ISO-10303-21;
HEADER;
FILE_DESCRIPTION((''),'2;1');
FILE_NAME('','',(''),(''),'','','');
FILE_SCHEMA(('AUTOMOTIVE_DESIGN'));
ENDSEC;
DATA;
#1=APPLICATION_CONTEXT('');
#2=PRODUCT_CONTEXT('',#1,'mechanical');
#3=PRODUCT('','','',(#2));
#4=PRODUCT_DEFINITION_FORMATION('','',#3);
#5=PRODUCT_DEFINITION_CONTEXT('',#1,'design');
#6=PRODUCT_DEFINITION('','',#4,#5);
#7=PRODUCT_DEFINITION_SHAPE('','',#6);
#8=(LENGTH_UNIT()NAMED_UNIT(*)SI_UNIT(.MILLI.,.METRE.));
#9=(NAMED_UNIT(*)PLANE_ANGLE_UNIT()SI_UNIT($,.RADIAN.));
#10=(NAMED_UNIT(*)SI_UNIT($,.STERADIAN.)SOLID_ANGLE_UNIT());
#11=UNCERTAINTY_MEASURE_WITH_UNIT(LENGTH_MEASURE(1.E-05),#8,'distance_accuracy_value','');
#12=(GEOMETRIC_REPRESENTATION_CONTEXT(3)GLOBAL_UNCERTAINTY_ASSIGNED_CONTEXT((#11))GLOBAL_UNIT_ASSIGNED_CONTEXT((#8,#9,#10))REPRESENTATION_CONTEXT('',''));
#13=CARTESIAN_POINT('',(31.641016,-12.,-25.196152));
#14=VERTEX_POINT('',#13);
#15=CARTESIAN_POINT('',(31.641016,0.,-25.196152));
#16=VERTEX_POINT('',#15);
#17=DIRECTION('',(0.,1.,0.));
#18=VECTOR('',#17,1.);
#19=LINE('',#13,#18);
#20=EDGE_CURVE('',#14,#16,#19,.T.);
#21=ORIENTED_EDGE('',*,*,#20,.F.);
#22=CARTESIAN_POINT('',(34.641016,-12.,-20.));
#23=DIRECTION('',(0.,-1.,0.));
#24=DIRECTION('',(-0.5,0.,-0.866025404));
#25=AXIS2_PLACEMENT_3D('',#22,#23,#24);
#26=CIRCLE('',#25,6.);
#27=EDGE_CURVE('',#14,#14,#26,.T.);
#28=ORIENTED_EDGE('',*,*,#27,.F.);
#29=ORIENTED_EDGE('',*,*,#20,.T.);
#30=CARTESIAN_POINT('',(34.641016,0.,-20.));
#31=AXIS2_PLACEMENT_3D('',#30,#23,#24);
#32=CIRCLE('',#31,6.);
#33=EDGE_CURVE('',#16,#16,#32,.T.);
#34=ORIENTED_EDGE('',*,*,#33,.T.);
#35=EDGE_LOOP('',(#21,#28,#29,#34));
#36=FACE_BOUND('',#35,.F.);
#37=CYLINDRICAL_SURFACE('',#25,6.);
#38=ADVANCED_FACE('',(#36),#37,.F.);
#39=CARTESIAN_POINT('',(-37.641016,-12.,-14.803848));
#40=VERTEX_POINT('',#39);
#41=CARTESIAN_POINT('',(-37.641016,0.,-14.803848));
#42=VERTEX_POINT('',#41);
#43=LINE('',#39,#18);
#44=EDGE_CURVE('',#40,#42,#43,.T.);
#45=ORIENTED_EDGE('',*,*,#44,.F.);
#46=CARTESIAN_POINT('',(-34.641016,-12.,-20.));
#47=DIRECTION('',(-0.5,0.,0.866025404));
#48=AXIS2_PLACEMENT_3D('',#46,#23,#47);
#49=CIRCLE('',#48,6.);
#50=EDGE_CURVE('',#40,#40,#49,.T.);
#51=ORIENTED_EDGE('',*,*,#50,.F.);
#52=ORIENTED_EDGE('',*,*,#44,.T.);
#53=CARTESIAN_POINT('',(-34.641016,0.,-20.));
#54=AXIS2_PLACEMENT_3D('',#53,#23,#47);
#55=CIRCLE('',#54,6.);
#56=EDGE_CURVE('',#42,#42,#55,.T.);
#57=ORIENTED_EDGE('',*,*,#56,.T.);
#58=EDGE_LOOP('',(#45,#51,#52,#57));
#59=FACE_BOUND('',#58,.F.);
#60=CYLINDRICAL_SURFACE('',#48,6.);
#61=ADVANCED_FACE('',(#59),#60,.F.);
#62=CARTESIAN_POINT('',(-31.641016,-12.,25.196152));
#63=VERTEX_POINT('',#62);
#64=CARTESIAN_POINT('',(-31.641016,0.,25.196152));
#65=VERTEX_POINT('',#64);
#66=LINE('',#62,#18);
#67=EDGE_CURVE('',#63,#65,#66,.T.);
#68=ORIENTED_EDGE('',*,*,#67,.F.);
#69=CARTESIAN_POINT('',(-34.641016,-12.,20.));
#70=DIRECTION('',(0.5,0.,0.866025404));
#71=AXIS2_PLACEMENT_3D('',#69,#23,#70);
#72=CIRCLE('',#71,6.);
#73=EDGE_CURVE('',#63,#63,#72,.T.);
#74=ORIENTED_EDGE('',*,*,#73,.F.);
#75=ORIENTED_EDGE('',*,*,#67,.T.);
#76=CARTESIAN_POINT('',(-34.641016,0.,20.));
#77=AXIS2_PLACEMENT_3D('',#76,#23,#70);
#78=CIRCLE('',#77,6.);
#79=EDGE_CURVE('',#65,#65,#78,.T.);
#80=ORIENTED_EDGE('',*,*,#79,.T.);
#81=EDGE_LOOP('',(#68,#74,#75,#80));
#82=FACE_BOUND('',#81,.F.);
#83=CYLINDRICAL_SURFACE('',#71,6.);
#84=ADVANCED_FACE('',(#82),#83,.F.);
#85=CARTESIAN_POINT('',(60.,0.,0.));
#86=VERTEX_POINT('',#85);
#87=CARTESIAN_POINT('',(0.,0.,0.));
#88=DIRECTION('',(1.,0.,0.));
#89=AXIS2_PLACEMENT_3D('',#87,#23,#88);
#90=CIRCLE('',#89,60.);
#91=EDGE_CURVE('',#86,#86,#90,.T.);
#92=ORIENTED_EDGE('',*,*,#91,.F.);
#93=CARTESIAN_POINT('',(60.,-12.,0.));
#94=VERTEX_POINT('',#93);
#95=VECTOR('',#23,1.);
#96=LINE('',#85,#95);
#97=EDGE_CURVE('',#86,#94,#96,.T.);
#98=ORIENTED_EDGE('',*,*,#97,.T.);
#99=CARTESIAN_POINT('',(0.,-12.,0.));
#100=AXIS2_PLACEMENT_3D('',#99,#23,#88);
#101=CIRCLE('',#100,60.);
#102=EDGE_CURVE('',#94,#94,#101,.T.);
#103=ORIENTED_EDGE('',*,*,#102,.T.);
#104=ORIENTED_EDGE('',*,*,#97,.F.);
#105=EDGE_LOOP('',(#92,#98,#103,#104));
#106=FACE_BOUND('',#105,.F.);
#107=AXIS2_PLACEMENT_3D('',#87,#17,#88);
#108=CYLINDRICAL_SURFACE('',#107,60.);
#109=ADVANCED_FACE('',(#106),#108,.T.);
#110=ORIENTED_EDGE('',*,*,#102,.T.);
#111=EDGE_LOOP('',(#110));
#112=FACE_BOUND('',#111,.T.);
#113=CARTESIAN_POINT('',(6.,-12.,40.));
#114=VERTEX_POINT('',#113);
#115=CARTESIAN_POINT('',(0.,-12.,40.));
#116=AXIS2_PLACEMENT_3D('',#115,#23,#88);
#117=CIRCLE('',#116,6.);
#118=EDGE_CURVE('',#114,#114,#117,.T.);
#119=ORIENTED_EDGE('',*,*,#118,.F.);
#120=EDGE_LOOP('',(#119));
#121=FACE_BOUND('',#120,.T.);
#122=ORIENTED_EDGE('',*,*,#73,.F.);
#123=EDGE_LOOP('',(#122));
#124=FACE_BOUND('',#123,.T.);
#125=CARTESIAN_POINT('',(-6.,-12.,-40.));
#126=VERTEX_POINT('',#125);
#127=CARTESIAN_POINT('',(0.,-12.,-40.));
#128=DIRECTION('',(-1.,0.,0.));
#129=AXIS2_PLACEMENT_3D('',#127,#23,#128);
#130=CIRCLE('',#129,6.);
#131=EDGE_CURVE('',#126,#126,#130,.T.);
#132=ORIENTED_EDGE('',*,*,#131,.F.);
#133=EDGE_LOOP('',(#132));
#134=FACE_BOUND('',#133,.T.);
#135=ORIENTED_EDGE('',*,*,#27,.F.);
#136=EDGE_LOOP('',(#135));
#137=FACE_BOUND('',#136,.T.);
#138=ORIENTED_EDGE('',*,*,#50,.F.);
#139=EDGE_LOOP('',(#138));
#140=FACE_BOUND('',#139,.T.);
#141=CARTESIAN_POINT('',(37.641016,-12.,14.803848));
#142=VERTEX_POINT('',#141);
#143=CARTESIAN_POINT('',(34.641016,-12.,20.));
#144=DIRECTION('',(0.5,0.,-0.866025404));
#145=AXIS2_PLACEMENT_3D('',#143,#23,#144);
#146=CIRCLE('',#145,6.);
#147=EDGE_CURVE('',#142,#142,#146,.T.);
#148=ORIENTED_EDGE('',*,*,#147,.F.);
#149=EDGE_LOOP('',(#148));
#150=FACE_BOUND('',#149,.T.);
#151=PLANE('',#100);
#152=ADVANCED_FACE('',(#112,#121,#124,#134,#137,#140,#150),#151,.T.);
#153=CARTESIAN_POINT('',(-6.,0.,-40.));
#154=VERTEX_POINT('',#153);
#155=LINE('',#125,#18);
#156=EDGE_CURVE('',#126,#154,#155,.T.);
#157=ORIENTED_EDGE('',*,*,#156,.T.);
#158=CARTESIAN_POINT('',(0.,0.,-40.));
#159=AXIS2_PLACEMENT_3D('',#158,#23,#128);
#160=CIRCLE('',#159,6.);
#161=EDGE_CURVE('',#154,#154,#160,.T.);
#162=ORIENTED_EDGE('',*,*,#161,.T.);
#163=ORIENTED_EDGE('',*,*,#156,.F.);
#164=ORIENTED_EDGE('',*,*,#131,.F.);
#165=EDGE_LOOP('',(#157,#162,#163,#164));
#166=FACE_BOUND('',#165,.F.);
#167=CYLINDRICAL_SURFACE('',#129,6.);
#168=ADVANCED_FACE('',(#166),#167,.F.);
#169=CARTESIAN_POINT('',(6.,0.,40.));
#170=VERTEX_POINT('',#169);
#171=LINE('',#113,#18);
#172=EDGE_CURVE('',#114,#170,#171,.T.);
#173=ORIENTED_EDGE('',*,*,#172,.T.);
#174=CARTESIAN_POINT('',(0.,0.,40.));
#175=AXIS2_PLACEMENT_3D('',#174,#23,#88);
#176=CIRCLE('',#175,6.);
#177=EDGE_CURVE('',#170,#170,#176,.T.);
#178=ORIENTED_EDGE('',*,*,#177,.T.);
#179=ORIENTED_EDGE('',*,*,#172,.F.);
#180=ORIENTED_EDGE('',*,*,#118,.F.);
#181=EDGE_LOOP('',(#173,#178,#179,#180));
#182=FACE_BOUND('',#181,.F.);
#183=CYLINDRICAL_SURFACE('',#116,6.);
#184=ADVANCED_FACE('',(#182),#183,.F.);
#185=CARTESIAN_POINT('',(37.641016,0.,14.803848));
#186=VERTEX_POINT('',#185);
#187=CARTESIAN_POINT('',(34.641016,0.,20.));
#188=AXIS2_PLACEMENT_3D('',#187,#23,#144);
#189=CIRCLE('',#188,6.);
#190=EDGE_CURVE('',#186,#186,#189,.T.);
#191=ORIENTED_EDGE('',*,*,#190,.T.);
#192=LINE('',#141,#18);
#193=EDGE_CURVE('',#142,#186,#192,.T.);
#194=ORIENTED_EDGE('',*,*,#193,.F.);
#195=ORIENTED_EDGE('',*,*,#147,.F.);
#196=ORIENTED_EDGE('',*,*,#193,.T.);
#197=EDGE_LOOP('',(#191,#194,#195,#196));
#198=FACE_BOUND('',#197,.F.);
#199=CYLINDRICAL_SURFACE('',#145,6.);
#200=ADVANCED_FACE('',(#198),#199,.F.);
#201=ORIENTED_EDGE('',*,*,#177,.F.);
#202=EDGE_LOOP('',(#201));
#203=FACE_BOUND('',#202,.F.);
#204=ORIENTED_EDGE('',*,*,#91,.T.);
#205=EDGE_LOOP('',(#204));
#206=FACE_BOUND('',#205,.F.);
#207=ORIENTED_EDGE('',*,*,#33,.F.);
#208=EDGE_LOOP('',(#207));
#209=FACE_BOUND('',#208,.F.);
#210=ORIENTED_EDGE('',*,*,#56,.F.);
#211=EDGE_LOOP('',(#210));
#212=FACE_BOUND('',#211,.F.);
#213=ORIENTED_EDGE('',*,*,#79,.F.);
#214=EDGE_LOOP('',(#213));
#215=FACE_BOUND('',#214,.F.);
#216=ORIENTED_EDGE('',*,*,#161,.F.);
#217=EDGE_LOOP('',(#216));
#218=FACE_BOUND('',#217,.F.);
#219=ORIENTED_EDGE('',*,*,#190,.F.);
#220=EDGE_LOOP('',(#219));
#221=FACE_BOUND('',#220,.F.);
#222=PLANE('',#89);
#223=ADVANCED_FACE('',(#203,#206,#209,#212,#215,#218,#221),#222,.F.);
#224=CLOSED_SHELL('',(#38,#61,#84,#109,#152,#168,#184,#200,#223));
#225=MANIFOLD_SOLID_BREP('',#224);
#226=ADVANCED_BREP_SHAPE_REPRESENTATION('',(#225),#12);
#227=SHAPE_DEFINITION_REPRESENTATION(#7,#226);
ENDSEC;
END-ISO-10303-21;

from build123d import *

# Parameters (mm, degrees)
F2_R            = 60
F3_DEPTH        = 12
F4_R            = 6
F5_DEPTH        = 12.001
F5_COPIES_COUNT = 6


# Not quite as in the source:
# - a pattern or mirror of a feature is missing from the dataset's text; its kind, count and spacing are read off the source's solid


with BuildPart() as f3:
    # F2 (on Front) → F3 (new body)
    with BuildSketch(Plane.XZ):
        Circle(F2_R)
    extrude(amount=F3_DEPTH)

    # F4 (on face) → F5 (cut, through all)
    with BuildSketch(Plane.XZ.offset(12)):
        with Locations((0, 40)):
            Circle(F4_R)
    f5 = extrude(amount=-F5_DEPTH, mode=Mode.SUBTRACT)

    # F5_copies: F5 ×6 about axis
    f5_copies_axis = Axis((0, 0, 0), (0, 1, 0))
    for i in range(1, F5_COPIES_COUNT):
        add(f5.rotate(f5_copies_axis, i * 360 / F5_COPIES_COUNT), mode=Mode.SUBTRACT)


solid = f3.part
